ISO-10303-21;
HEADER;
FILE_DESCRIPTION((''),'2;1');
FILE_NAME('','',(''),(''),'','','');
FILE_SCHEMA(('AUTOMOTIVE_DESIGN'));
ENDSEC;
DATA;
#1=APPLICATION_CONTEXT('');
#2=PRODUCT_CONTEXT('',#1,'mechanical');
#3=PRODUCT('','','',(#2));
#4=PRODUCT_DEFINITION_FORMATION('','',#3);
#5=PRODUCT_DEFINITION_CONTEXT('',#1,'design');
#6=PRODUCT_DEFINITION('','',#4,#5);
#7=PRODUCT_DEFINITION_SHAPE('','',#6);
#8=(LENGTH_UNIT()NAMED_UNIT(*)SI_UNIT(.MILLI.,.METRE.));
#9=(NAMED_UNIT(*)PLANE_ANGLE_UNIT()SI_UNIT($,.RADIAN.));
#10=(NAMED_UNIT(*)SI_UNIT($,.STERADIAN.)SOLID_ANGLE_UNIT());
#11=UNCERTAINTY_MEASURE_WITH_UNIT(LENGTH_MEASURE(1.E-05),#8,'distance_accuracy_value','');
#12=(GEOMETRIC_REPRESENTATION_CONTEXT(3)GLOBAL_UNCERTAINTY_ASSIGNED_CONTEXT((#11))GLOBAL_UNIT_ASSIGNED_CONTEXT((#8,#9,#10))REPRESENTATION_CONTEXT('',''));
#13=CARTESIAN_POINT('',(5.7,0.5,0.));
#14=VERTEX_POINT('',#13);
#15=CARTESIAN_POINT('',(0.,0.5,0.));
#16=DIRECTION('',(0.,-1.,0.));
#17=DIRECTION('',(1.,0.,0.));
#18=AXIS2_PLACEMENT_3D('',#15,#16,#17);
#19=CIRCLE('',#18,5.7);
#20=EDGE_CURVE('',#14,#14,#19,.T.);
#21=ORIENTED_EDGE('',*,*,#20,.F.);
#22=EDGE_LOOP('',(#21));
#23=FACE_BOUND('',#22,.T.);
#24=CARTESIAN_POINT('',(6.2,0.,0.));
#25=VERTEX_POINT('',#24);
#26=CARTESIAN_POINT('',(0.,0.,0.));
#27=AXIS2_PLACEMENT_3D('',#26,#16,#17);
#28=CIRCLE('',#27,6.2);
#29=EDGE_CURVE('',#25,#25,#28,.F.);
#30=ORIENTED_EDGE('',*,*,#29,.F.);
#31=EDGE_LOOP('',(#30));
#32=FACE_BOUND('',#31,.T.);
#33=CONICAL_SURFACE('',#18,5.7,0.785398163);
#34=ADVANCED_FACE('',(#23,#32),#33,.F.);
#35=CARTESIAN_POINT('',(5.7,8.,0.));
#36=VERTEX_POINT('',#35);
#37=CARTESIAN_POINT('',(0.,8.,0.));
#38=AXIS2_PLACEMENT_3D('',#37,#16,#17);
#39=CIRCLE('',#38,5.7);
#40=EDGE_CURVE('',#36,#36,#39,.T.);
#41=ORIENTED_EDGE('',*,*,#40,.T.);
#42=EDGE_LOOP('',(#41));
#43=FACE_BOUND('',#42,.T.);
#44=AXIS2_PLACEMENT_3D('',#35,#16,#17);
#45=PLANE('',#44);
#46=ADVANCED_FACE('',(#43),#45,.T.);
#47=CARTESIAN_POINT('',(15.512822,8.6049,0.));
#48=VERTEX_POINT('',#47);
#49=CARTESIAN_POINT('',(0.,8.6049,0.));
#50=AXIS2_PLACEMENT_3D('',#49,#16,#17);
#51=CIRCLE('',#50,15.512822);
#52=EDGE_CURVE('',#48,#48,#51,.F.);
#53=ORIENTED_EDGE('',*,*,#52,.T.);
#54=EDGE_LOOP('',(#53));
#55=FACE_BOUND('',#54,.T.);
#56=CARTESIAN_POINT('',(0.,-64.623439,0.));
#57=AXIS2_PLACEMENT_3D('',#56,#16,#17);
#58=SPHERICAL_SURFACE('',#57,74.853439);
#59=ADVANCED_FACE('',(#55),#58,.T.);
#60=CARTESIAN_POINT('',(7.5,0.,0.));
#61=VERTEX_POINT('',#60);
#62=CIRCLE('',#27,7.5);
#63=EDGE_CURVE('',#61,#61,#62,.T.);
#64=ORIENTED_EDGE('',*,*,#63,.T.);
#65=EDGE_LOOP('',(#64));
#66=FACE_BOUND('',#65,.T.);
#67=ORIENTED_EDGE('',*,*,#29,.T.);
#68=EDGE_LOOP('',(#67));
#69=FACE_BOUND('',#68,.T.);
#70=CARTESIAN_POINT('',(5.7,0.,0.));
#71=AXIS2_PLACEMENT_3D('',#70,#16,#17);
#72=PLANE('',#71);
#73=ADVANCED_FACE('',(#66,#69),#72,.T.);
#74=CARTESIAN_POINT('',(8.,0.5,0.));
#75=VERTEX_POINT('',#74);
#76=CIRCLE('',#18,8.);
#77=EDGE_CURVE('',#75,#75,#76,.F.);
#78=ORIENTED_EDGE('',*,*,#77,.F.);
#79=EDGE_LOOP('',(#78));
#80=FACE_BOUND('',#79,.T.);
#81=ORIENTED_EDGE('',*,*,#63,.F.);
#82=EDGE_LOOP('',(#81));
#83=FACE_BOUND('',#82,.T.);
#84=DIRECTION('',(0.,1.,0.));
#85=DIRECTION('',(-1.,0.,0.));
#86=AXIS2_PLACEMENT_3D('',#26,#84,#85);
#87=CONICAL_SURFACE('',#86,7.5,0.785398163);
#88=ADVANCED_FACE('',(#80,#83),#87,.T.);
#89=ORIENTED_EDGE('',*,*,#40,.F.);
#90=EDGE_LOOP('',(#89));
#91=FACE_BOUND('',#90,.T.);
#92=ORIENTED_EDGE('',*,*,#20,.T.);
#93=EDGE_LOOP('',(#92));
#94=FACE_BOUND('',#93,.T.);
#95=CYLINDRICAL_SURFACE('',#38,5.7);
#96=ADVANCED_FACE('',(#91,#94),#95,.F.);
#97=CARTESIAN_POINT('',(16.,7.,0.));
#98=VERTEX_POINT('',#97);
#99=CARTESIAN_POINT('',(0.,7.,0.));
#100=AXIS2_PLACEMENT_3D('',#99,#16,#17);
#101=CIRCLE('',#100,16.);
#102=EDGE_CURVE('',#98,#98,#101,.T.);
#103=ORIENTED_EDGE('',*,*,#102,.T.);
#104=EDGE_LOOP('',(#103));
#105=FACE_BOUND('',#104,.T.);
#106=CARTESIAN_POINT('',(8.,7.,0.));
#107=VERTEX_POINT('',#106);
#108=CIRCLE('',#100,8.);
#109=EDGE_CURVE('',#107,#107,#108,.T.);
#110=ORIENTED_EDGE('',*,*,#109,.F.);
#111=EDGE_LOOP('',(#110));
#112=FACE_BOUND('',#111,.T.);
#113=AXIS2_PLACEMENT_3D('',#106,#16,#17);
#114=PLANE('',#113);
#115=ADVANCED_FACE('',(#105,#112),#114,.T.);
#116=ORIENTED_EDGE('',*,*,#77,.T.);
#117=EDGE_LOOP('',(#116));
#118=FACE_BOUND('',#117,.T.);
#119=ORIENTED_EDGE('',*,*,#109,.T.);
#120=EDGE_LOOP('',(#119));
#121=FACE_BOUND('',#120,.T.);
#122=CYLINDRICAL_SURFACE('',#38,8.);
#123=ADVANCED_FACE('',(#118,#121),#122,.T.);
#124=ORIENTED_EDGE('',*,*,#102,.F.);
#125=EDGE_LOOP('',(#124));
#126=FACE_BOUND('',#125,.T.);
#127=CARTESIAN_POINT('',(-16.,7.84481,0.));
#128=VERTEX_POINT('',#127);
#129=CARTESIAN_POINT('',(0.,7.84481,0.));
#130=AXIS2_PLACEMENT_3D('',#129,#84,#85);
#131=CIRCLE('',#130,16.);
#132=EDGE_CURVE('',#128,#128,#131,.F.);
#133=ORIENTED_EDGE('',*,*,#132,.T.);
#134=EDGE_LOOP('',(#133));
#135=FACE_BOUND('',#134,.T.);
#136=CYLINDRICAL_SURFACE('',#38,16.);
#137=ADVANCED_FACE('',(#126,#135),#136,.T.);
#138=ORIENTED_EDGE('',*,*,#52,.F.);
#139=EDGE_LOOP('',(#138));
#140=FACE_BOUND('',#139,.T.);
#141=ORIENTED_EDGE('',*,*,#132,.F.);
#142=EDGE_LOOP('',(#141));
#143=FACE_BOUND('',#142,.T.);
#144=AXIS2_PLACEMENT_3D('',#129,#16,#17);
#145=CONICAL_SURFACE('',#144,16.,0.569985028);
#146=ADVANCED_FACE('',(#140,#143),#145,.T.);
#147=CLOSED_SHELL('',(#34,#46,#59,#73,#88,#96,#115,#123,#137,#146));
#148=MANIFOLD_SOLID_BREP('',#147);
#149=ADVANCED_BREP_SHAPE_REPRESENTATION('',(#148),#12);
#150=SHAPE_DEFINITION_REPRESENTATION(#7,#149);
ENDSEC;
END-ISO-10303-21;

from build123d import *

# Parameters (mm, degrees)
CHAMFER_1_SIZE = 0.655190236
CHAMFER_2_SIZE = 0.5


with BuildPart() as part:
    # ｽｹｯﾁ1 → 回転1 (revolve)
    with BuildSketch(Plane.XY):
        with BuildLine():
            Line((5.7, 0), (5.7, 8))
            Line((5.7, 8), (0, 8))
            Line((0, 8), (0, 10.23))
            ThreePointArc((0, 10.23), (8.046628176, 9.796243245), (16, 8.5))
            Line((16, 8.5), (16, 7))
            Line((16, 7), (8, 7))
            Line((8, 7), (8, 0))
            Line((8, 0), (5.7, 0))
        make_face()
    revolve(axis=Axis((0, 8, 0), (0, 1, 0)))

    # 面取り1
    # the kernel refuses this chamfer: 0.655190236, 0.5 mm, written as the material it takes off along each edge
    with BuildSketch(Plane(origin=(0, 8.5, 0), x_dir=(1, 0, 0), z_dir=(0, 0, 1))) as chamfer_1_piece_1:
        with BuildLine():
            Line((15.512821873, 0.104900382), (16, -CHAMFER_1_SIZE))
            Line((16, -CHAMFER_1_SIZE), (16, 0))
            ThreePointArc((16, 0), (15.747471206, 0.054798761), (15.512821873, 0.104900382))
        make_face()
    revolve(axis=Axis((0, 8.5, 0), (0, 1, 0)), mode=Mode.SUBTRACT)

    # 面取り2
    chamfer_2_edges = [part.edges().sort_by_distance(p)[0] for p in [
        (-5.7, 0, 0),
        (-8, 0, 0),
    ]]
    chamfer(chamfer_2_edges, length=CHAMFER_2_SIZE)


solid = part.part
